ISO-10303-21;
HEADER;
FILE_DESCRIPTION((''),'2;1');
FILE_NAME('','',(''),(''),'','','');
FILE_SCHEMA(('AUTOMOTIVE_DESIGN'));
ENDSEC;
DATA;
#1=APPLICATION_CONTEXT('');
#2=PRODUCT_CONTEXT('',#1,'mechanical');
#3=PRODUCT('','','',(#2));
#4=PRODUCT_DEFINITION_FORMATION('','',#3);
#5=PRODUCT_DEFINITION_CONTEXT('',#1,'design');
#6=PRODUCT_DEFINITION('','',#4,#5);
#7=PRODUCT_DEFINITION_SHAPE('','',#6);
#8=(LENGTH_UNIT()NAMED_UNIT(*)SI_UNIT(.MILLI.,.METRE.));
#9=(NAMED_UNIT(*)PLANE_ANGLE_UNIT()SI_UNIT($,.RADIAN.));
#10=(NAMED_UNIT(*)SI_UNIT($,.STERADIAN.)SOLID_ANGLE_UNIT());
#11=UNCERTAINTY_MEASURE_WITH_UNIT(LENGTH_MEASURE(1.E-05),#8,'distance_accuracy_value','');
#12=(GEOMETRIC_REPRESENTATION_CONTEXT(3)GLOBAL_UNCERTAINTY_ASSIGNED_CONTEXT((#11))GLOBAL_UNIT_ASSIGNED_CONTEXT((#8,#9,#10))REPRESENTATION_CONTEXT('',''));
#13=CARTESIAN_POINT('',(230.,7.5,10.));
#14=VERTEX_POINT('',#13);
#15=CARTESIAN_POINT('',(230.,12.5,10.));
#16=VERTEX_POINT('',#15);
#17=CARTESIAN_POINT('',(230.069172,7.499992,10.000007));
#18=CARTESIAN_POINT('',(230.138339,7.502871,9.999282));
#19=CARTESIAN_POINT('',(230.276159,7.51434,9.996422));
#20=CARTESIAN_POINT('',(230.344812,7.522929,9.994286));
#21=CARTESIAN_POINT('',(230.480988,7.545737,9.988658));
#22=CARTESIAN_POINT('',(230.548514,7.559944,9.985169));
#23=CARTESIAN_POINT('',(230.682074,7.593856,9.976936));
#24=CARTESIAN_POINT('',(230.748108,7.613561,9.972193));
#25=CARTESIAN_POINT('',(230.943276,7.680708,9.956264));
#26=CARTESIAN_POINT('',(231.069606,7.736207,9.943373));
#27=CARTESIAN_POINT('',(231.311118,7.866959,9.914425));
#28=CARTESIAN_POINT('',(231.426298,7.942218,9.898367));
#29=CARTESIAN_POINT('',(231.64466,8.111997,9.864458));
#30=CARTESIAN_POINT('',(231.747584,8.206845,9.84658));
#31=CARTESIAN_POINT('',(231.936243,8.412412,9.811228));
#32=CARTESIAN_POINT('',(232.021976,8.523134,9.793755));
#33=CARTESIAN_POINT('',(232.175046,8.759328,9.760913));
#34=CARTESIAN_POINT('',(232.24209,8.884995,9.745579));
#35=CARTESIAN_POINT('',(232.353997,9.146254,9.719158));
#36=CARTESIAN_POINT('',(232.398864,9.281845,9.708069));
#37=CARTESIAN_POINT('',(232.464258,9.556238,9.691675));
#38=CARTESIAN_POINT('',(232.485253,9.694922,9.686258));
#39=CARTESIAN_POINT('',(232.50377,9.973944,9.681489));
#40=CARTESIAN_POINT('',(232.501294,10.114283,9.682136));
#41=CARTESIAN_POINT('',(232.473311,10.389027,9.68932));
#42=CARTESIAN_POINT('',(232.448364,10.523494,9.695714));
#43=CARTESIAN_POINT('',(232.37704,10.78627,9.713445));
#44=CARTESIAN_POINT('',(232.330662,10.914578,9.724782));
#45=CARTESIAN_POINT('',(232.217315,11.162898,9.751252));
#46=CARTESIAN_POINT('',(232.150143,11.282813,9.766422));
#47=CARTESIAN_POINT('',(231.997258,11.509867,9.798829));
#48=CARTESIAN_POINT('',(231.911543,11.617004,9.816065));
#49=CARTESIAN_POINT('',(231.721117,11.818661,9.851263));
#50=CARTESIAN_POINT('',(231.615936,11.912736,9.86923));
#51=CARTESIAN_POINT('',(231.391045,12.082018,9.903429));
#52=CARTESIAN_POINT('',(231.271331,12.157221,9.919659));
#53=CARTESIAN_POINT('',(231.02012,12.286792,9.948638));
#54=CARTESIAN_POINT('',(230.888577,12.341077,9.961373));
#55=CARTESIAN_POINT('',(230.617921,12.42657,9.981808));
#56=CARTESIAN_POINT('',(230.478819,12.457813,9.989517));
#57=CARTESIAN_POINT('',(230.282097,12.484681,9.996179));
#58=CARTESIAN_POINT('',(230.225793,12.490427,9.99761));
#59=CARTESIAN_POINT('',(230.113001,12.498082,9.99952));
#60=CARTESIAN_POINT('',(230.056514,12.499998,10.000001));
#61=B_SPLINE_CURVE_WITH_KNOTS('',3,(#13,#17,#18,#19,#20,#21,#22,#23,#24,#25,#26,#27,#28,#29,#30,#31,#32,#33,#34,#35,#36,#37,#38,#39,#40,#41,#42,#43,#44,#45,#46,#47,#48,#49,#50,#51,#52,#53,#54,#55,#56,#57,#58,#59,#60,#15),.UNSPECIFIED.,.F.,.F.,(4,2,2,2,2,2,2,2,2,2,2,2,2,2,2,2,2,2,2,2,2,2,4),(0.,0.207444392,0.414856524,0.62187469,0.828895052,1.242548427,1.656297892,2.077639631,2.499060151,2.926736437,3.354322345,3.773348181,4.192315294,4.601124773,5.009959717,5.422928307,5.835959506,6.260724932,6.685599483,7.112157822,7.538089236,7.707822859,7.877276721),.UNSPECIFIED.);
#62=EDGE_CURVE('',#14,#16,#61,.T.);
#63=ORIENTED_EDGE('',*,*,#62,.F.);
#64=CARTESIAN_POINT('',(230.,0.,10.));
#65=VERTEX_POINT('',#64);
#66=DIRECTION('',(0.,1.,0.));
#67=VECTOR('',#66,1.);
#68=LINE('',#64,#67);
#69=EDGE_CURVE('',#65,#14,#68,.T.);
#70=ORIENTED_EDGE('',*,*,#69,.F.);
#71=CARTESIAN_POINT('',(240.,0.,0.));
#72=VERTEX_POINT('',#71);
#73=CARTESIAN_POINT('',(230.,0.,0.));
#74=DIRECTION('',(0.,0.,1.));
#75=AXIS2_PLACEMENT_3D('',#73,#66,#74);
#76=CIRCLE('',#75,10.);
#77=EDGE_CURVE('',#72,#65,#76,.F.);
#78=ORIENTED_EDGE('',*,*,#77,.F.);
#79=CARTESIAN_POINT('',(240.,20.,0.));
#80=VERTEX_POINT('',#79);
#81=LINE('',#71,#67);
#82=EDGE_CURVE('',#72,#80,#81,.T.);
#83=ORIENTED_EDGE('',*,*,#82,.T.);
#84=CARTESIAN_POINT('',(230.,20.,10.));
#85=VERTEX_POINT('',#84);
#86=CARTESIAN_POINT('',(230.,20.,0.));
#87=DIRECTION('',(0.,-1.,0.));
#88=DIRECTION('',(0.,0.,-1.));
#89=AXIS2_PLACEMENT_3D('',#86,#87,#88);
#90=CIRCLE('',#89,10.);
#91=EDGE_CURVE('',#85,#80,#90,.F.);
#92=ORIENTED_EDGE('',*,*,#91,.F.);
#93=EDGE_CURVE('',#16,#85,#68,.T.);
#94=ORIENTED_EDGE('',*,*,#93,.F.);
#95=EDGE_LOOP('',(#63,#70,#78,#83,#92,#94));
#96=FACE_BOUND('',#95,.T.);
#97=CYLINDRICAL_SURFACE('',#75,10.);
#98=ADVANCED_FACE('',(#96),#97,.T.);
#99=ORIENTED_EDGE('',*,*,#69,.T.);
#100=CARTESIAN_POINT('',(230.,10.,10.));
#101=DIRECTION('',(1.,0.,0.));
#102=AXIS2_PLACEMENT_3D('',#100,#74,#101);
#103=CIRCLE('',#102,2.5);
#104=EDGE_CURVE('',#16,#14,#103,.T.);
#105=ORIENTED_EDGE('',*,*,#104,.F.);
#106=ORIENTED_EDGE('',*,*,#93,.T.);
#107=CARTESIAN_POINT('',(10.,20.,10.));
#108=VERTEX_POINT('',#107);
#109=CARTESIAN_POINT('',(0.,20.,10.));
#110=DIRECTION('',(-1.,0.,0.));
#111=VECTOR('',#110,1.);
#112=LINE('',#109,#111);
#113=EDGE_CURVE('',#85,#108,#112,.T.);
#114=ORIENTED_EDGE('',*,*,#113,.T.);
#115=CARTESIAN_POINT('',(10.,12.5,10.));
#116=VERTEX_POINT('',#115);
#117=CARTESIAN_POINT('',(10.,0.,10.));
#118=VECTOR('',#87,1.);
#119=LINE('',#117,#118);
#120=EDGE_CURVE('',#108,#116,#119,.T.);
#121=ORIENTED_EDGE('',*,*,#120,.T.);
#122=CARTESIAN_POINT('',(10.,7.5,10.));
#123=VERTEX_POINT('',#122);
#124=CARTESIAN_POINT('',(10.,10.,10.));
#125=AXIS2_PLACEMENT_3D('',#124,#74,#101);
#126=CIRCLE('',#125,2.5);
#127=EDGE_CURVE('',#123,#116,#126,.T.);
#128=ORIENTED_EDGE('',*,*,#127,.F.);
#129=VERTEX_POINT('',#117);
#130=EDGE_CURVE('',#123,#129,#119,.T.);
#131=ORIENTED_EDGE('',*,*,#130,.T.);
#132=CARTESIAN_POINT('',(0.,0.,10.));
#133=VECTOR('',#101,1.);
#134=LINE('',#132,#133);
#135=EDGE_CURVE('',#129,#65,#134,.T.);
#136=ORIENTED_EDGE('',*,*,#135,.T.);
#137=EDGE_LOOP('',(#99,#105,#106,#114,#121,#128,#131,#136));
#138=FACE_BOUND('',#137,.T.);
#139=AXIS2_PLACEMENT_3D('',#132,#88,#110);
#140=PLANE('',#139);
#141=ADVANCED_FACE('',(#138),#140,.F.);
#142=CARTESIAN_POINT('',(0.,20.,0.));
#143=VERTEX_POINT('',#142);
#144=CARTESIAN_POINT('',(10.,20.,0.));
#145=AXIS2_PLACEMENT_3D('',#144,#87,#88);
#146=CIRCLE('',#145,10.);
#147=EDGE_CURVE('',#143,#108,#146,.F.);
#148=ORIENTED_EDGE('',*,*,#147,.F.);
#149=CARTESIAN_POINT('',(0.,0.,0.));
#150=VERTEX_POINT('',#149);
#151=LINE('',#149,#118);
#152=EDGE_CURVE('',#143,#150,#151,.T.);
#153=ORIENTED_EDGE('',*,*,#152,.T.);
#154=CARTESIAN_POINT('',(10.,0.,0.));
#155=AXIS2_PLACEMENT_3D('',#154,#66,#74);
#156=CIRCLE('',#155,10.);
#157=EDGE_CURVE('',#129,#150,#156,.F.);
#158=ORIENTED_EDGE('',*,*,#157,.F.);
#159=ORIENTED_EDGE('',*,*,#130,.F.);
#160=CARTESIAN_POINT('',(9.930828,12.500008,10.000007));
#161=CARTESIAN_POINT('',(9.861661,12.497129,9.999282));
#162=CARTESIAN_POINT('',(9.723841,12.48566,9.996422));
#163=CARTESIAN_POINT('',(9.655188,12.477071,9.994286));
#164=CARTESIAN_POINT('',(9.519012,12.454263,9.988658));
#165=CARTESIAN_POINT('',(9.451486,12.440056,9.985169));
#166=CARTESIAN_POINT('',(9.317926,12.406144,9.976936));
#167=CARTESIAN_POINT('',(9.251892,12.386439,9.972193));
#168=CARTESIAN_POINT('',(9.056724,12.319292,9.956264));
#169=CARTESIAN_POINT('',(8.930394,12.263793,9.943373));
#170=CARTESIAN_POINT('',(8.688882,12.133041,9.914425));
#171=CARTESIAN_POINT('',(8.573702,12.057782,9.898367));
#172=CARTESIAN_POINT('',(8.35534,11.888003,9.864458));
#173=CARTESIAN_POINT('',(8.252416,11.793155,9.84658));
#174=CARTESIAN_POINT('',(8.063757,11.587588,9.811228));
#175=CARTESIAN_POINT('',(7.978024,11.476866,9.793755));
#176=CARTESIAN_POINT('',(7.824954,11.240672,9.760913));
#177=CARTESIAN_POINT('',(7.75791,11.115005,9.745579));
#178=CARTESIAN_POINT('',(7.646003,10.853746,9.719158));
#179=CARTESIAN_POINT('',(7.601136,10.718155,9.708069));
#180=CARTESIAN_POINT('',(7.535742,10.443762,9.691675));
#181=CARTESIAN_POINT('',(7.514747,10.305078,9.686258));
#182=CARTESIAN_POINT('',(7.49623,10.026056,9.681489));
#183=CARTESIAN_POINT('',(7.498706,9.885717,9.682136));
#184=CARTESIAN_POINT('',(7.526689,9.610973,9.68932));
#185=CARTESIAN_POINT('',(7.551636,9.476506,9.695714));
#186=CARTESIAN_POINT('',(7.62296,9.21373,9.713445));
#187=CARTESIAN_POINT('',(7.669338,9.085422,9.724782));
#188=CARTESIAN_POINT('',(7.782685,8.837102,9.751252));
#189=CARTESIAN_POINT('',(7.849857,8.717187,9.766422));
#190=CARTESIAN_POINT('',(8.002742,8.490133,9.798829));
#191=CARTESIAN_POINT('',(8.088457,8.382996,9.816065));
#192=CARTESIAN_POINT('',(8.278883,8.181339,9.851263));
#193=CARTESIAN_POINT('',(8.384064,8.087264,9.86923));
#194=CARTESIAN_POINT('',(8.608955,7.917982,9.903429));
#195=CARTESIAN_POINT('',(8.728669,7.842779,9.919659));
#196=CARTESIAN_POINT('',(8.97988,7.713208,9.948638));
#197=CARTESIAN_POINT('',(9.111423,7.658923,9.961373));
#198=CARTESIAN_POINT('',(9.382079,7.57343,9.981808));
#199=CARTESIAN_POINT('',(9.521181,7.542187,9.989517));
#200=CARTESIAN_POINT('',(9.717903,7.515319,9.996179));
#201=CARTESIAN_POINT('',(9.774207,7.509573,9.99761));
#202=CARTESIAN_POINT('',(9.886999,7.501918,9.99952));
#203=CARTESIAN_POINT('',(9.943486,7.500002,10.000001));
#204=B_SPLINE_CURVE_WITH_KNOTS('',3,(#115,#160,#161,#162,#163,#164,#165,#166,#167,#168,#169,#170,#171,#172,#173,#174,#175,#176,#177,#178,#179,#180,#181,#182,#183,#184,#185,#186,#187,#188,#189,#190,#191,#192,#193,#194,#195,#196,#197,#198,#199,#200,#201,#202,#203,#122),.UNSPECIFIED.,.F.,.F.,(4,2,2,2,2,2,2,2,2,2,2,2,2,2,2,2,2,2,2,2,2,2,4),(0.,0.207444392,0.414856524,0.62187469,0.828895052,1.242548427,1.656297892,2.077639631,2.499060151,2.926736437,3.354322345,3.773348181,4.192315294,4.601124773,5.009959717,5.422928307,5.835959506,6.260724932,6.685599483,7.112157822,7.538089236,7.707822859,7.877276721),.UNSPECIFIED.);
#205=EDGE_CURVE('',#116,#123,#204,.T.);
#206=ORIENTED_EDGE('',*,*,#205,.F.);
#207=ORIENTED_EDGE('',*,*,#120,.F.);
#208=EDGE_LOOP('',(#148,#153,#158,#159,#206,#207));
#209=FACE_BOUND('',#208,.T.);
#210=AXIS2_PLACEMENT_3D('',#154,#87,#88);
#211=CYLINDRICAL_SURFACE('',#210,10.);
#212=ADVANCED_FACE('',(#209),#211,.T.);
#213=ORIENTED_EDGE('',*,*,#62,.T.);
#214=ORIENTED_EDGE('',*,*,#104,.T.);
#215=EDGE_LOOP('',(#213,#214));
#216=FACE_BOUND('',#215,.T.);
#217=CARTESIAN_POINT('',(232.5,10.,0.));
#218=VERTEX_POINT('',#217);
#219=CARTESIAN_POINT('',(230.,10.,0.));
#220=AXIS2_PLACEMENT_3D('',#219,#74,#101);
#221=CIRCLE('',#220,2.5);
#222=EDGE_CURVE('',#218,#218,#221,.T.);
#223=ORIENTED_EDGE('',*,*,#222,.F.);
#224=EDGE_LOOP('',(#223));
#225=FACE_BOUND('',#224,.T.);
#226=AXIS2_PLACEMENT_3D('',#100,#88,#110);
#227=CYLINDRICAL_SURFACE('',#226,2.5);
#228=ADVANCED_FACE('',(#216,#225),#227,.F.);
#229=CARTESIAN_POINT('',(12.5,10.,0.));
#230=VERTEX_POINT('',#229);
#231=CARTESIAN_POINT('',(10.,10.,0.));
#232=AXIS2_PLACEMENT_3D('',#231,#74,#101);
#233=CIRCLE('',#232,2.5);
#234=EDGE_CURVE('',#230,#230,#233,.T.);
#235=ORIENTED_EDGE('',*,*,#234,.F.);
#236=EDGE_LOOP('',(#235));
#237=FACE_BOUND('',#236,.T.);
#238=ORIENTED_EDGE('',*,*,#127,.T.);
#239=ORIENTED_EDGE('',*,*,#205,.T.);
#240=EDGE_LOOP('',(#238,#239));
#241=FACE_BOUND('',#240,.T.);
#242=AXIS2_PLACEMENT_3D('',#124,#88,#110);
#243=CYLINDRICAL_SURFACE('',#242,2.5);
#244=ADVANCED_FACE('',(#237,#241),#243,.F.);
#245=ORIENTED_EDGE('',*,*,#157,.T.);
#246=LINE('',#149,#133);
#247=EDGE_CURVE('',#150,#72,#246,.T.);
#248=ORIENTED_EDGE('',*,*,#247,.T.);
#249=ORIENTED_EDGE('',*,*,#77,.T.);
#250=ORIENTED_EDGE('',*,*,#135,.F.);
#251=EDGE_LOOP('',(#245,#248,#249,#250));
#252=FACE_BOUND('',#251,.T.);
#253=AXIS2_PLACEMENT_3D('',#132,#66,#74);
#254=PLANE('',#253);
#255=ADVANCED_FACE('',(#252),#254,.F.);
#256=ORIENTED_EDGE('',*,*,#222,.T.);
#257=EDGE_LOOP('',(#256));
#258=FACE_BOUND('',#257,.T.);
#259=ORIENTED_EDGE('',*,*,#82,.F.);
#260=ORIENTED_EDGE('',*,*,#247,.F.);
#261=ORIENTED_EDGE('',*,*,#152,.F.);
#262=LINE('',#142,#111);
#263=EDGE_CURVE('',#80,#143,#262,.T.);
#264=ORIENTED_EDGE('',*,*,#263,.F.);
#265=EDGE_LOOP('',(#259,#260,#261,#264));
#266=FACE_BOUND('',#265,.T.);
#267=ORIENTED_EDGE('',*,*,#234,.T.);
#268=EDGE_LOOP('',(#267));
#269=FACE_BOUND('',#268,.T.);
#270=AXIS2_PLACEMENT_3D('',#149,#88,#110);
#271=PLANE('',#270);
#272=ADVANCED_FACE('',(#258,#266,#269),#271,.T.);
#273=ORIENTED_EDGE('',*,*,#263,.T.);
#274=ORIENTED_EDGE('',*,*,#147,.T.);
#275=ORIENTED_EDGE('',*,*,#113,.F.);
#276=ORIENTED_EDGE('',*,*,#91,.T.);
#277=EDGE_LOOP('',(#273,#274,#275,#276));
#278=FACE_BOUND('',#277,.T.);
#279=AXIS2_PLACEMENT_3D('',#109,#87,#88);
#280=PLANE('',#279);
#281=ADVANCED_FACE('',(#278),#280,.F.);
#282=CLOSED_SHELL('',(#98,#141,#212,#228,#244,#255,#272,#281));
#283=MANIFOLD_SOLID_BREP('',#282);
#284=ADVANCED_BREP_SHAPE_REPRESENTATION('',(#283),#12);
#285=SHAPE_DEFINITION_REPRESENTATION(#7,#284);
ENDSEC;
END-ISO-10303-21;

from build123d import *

# Parameters (mm, degrees)
SKETCH1_W           = 240
SKETCH1_H           = 20
SKETCH1_R           = 2.5
BOSS_EXTRUDE1_DEPTH = 10
FILLET1_START       = -1
FILLET1_DEPTH       = 22


with BuildPart() as part:
    # Sketch1 → Boss-Extrude1 (new body)
    with BuildSketch(Plane.XY):
        with Locations((120, 10)):
            Rectangle(SKETCH1_W, SKETCH1_H)
        with Locations((230, 10)):
            Circle(SKETCH1_R, mode=Mode.SUBTRACT)
        with Locations((10, 10)):
            Circle(SKETCH1_R, mode=Mode.SUBTRACT)
    extrude(amount=BOSS_EXTRUDE1_DEPTH)

    # Fillet1: read off the stored shape, not the designer's step
    # Fillet1 outline → Fillet1 (cut)
    with BuildSketch(Plane(origin=(0, 0, 0), x_dir=(1, 0, 0), z_dir=(0, 1, 0)).offset(FILLET1_START)):
        with BuildLine():
            Line((0, -10), (10, -10))
            ThreePointArc((10, -10), (2.928932188, -7.071067812), (0, 0))
            Line((0, 0), (0, -10))
        make_face()
        with BuildLine():
            ThreePointArc((240, 0), (237.071067812, -7.071067812), (230, -10))
            Line((230, -10), (240, -10))
            Line((240, -10), (240, 0))
        make_face()
    extrude(amount=FILLET1_DEPTH, mode=Mode.SUBTRACT)


solid = part.part
